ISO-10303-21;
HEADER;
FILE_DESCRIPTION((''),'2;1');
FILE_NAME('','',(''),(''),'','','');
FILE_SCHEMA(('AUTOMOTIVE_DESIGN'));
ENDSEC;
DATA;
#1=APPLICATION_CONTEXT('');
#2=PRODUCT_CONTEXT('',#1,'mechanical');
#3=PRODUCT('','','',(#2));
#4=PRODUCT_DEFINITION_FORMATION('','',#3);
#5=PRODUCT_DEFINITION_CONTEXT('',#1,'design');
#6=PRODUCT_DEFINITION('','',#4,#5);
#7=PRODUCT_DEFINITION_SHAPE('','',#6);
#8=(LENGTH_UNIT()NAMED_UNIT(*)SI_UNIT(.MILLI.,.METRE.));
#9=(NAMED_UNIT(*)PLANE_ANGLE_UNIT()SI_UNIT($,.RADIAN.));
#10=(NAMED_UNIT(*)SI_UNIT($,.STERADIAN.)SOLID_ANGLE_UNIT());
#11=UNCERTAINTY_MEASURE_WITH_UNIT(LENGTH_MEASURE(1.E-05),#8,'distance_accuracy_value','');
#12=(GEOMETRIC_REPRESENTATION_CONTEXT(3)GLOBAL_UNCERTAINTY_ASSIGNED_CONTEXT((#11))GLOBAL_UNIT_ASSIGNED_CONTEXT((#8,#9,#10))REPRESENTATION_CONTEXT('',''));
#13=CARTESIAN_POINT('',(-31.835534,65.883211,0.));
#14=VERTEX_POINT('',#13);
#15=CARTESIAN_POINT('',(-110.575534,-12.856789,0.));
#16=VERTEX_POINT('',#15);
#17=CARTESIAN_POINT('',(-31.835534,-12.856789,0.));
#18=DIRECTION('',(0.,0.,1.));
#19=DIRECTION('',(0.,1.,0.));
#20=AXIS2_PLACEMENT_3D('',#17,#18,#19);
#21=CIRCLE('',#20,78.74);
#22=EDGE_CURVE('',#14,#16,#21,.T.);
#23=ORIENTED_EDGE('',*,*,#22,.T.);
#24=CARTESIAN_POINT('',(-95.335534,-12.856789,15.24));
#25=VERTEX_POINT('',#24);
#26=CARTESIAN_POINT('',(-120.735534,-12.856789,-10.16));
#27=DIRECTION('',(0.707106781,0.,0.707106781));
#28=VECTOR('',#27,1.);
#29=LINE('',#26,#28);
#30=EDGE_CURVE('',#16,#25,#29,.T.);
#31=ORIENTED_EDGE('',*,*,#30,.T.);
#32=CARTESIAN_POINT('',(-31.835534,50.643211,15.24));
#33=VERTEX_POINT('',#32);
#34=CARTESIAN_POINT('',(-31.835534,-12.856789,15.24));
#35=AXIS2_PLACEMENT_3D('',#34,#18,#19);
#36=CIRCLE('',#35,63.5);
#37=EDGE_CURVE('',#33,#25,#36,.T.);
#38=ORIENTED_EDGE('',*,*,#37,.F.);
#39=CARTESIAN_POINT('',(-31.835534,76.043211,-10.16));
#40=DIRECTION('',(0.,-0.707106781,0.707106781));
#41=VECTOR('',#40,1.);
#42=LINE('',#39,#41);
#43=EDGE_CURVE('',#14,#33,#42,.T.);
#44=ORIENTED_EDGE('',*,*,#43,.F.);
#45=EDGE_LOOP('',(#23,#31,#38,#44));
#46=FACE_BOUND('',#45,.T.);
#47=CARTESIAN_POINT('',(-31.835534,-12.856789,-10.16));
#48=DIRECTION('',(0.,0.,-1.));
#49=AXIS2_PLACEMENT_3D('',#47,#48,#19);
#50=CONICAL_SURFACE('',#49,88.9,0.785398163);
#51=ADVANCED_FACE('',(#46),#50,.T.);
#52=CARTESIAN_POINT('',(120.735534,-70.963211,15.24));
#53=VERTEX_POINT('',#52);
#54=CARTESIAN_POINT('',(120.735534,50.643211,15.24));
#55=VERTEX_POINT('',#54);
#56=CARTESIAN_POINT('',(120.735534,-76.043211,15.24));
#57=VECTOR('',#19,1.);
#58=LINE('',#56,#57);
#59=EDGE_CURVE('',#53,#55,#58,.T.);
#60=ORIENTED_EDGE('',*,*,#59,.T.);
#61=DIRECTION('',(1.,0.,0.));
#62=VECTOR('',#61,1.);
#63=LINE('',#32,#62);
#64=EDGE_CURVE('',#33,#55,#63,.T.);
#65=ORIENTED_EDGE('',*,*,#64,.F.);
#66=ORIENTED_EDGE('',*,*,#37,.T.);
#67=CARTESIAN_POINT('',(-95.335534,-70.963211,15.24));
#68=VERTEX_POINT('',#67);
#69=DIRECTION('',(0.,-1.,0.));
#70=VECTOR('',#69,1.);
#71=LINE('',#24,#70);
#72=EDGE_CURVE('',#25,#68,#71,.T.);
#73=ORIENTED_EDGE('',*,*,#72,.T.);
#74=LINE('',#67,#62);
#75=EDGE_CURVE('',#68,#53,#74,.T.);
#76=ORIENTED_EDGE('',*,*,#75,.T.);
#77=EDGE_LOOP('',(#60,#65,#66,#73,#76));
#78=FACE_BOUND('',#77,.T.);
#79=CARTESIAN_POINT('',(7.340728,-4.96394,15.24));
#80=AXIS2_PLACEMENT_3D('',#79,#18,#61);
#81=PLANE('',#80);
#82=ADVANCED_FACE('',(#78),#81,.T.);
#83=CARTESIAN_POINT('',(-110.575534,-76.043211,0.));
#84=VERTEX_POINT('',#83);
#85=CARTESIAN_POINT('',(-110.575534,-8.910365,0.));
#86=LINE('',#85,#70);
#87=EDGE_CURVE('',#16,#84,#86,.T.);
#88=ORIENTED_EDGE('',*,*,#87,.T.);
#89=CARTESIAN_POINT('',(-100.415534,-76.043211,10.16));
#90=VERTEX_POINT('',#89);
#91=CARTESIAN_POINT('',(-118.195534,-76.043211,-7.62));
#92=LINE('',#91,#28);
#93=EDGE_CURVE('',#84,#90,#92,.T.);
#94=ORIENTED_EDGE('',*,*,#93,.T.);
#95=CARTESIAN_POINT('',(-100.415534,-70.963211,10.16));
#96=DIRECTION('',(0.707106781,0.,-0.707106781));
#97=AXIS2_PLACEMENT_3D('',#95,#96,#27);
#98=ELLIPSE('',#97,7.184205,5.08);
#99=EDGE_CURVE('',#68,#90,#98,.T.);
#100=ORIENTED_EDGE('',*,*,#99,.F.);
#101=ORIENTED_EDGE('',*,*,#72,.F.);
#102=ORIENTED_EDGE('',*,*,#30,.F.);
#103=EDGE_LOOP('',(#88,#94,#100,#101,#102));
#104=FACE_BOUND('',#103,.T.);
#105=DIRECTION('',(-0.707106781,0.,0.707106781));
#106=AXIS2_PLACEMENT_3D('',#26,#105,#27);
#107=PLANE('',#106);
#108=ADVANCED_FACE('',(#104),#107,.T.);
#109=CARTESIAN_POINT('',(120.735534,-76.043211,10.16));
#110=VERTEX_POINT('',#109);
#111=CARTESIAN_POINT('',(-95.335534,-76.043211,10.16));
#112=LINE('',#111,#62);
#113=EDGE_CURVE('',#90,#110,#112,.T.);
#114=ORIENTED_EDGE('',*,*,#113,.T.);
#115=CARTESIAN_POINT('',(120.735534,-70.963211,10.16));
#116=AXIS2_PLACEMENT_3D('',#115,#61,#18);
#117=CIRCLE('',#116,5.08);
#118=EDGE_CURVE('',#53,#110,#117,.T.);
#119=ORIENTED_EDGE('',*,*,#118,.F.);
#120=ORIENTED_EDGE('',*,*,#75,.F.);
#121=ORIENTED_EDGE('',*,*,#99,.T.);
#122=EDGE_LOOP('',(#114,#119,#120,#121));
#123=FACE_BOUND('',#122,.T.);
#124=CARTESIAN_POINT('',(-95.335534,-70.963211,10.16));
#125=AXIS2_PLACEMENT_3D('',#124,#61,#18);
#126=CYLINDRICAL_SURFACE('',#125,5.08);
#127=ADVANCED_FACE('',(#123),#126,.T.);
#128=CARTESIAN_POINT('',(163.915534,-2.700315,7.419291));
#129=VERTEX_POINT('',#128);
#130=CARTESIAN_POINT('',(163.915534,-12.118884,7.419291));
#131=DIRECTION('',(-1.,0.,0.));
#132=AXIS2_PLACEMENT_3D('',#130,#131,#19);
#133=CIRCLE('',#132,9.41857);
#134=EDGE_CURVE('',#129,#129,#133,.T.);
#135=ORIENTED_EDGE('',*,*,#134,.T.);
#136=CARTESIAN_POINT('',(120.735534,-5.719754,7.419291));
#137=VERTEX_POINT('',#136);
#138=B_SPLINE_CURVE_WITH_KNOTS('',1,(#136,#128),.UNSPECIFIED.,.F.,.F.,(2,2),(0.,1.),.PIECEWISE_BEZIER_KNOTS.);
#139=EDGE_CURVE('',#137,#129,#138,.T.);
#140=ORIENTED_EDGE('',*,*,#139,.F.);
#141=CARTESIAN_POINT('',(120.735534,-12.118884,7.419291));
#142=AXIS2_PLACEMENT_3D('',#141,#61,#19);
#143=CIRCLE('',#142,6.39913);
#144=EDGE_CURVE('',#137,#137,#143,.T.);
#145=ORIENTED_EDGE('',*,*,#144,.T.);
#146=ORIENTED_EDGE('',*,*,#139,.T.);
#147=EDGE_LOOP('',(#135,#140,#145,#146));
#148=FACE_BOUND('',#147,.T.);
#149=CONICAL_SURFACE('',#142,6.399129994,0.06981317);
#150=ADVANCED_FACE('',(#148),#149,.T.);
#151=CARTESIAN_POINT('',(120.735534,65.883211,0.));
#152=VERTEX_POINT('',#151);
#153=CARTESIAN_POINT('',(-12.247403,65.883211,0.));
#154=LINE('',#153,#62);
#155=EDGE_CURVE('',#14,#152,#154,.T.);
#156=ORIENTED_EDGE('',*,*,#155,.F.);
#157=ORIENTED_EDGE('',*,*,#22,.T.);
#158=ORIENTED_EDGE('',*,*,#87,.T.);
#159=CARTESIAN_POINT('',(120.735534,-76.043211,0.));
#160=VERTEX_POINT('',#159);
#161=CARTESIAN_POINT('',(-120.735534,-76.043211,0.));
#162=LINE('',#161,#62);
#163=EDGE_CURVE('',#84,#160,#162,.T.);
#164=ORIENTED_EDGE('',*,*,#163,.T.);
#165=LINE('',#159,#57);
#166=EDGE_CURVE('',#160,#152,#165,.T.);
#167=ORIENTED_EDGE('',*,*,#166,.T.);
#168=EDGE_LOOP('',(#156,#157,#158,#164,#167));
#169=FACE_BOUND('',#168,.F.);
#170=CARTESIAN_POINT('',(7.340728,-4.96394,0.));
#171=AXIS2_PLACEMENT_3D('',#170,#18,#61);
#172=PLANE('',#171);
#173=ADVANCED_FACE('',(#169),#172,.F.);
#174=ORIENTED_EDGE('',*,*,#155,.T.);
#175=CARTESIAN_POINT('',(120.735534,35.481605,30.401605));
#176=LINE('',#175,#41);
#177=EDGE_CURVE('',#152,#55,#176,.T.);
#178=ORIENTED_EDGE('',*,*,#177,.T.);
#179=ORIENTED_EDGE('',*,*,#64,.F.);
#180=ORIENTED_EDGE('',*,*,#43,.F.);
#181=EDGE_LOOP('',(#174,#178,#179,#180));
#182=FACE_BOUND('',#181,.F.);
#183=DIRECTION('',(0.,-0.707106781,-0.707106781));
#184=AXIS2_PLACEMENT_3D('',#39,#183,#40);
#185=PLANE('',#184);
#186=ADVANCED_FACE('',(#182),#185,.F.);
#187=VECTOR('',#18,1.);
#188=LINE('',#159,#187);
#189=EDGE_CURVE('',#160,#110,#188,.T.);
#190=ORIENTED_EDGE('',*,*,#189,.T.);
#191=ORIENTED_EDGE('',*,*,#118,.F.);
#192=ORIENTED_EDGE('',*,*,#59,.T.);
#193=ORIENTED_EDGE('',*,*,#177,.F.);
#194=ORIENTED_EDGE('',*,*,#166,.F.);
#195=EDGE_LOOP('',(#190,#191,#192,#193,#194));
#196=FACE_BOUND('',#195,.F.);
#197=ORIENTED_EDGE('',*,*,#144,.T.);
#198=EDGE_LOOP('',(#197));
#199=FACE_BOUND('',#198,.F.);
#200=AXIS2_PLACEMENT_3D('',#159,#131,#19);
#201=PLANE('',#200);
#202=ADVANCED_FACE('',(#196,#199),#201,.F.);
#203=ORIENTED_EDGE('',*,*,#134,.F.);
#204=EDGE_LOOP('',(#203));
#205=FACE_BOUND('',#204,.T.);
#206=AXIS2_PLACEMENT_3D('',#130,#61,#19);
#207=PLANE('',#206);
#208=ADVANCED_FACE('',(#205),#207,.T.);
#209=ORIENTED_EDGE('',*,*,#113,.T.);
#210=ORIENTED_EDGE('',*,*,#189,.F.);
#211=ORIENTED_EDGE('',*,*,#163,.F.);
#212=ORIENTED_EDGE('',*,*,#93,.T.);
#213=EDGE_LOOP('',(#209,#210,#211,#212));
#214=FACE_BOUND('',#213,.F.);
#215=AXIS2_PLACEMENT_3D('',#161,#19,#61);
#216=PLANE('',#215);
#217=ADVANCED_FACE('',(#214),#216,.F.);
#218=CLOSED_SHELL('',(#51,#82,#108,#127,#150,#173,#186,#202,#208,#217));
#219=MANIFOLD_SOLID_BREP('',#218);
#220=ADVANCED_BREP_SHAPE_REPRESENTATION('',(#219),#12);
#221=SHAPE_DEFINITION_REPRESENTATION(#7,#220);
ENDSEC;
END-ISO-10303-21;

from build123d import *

# Parameters (mm, degrees)
F1_DEPTH    = 15.24
F2_T1_DEPTH = 217.8918149653
F2_T3_DEPTH = 128.5071697417
F2_T6_ANGLE = 90
F3_R        = 5.08
F4_R        = 6.3991299939
F5_DEPTH    = 43.18
F5_TAPER    = -4


# Not quite as in the source:
# - a fillet or chamfer that OpenCascade refuses, or shapes differently, is made with other operations: its cross-section is extruded or revolved along the edge and cut away or added


with BuildPart() as f1:
    # F0 (on Top) → F1 (new body)
    with BuildSketch(Plane.XY):
        with BuildLine():
            Line((120.7355335355, 76.0432109237), (-31.8355335355, 76.0432109237))
            ThreePointArc((-31.8355335355, 76.0432109237), (-94.697326383, 50.0050037712), (-120.7355335355, -12.8567890763))
            Line((-120.7355335355, -12.8567890763), (-120.7355335355, -76.0432109237))
            Line((-120.7355335355, -76.0432109237), (120.7355335355, -76.0432109237))
            Line((120.7355335355, -76.0432109237), (120.7355335355, 76.0432109237))
        make_face()
    extrude(amount=F1_DEPTH)

    # F2: chamfer of 25.4 on 1 edges, made by hand

    # F2_s2 → F2_t1 (cut)
    with BuildSketch(Plane.YZ.offset(-31.8355335355)):
        Polygon((76.0432109237, -10.16), (50.6432109237, 15.24), (76.0432109237, 15.24), align=None)
    extrude(amount=F2_T1_DEPTH, mode=Mode.SUBTRACT)

    # F2_s4 → F2_t3 (cut)
    with BuildSketch(Plane.XZ.offset(12.8567890763)):
        Polygon((-120.7355335355, -10.16), (-95.3355335355, 15.24), (-120.7355335355, 15.24), align=None)
    extrude(amount=F2_T3_DEPTH, mode=Mode.SUBTRACT)

    # F2_s5 → F2_t6 (revolve, cut)
    with BuildSketch(Plane.YZ.offset(-31.8355335355)):
        Polygon((76.0432109237, -10.16), (50.6432109237, 15.24), (76.0432109237, 15.24), align=None)
    revolve(axis=Axis((-31.8355335355, -12.8567890763, 15.24), (0, 0, 1)), revolution_arc=F2_T6_ANGLE, mode=Mode.SUBTRACT)

    # F3
    f3_edges = [f1.edges().sort_by_distance(p)[0] for p in [
        (12.7, -76.043211, 15.24),
    ]]
    fillet(f3_edges, radius=F3_R)

    # F4 (on face) → F5 (join)
    with BuildSketch(Plane.YZ.offset(120.7355335355)):
        with Locations((-12.1188843623, 7.419291418)):
            Circle(F4_R)
    extrude(amount=F5_DEPTH, taper=F5_TAPER)


solid = f1.part
